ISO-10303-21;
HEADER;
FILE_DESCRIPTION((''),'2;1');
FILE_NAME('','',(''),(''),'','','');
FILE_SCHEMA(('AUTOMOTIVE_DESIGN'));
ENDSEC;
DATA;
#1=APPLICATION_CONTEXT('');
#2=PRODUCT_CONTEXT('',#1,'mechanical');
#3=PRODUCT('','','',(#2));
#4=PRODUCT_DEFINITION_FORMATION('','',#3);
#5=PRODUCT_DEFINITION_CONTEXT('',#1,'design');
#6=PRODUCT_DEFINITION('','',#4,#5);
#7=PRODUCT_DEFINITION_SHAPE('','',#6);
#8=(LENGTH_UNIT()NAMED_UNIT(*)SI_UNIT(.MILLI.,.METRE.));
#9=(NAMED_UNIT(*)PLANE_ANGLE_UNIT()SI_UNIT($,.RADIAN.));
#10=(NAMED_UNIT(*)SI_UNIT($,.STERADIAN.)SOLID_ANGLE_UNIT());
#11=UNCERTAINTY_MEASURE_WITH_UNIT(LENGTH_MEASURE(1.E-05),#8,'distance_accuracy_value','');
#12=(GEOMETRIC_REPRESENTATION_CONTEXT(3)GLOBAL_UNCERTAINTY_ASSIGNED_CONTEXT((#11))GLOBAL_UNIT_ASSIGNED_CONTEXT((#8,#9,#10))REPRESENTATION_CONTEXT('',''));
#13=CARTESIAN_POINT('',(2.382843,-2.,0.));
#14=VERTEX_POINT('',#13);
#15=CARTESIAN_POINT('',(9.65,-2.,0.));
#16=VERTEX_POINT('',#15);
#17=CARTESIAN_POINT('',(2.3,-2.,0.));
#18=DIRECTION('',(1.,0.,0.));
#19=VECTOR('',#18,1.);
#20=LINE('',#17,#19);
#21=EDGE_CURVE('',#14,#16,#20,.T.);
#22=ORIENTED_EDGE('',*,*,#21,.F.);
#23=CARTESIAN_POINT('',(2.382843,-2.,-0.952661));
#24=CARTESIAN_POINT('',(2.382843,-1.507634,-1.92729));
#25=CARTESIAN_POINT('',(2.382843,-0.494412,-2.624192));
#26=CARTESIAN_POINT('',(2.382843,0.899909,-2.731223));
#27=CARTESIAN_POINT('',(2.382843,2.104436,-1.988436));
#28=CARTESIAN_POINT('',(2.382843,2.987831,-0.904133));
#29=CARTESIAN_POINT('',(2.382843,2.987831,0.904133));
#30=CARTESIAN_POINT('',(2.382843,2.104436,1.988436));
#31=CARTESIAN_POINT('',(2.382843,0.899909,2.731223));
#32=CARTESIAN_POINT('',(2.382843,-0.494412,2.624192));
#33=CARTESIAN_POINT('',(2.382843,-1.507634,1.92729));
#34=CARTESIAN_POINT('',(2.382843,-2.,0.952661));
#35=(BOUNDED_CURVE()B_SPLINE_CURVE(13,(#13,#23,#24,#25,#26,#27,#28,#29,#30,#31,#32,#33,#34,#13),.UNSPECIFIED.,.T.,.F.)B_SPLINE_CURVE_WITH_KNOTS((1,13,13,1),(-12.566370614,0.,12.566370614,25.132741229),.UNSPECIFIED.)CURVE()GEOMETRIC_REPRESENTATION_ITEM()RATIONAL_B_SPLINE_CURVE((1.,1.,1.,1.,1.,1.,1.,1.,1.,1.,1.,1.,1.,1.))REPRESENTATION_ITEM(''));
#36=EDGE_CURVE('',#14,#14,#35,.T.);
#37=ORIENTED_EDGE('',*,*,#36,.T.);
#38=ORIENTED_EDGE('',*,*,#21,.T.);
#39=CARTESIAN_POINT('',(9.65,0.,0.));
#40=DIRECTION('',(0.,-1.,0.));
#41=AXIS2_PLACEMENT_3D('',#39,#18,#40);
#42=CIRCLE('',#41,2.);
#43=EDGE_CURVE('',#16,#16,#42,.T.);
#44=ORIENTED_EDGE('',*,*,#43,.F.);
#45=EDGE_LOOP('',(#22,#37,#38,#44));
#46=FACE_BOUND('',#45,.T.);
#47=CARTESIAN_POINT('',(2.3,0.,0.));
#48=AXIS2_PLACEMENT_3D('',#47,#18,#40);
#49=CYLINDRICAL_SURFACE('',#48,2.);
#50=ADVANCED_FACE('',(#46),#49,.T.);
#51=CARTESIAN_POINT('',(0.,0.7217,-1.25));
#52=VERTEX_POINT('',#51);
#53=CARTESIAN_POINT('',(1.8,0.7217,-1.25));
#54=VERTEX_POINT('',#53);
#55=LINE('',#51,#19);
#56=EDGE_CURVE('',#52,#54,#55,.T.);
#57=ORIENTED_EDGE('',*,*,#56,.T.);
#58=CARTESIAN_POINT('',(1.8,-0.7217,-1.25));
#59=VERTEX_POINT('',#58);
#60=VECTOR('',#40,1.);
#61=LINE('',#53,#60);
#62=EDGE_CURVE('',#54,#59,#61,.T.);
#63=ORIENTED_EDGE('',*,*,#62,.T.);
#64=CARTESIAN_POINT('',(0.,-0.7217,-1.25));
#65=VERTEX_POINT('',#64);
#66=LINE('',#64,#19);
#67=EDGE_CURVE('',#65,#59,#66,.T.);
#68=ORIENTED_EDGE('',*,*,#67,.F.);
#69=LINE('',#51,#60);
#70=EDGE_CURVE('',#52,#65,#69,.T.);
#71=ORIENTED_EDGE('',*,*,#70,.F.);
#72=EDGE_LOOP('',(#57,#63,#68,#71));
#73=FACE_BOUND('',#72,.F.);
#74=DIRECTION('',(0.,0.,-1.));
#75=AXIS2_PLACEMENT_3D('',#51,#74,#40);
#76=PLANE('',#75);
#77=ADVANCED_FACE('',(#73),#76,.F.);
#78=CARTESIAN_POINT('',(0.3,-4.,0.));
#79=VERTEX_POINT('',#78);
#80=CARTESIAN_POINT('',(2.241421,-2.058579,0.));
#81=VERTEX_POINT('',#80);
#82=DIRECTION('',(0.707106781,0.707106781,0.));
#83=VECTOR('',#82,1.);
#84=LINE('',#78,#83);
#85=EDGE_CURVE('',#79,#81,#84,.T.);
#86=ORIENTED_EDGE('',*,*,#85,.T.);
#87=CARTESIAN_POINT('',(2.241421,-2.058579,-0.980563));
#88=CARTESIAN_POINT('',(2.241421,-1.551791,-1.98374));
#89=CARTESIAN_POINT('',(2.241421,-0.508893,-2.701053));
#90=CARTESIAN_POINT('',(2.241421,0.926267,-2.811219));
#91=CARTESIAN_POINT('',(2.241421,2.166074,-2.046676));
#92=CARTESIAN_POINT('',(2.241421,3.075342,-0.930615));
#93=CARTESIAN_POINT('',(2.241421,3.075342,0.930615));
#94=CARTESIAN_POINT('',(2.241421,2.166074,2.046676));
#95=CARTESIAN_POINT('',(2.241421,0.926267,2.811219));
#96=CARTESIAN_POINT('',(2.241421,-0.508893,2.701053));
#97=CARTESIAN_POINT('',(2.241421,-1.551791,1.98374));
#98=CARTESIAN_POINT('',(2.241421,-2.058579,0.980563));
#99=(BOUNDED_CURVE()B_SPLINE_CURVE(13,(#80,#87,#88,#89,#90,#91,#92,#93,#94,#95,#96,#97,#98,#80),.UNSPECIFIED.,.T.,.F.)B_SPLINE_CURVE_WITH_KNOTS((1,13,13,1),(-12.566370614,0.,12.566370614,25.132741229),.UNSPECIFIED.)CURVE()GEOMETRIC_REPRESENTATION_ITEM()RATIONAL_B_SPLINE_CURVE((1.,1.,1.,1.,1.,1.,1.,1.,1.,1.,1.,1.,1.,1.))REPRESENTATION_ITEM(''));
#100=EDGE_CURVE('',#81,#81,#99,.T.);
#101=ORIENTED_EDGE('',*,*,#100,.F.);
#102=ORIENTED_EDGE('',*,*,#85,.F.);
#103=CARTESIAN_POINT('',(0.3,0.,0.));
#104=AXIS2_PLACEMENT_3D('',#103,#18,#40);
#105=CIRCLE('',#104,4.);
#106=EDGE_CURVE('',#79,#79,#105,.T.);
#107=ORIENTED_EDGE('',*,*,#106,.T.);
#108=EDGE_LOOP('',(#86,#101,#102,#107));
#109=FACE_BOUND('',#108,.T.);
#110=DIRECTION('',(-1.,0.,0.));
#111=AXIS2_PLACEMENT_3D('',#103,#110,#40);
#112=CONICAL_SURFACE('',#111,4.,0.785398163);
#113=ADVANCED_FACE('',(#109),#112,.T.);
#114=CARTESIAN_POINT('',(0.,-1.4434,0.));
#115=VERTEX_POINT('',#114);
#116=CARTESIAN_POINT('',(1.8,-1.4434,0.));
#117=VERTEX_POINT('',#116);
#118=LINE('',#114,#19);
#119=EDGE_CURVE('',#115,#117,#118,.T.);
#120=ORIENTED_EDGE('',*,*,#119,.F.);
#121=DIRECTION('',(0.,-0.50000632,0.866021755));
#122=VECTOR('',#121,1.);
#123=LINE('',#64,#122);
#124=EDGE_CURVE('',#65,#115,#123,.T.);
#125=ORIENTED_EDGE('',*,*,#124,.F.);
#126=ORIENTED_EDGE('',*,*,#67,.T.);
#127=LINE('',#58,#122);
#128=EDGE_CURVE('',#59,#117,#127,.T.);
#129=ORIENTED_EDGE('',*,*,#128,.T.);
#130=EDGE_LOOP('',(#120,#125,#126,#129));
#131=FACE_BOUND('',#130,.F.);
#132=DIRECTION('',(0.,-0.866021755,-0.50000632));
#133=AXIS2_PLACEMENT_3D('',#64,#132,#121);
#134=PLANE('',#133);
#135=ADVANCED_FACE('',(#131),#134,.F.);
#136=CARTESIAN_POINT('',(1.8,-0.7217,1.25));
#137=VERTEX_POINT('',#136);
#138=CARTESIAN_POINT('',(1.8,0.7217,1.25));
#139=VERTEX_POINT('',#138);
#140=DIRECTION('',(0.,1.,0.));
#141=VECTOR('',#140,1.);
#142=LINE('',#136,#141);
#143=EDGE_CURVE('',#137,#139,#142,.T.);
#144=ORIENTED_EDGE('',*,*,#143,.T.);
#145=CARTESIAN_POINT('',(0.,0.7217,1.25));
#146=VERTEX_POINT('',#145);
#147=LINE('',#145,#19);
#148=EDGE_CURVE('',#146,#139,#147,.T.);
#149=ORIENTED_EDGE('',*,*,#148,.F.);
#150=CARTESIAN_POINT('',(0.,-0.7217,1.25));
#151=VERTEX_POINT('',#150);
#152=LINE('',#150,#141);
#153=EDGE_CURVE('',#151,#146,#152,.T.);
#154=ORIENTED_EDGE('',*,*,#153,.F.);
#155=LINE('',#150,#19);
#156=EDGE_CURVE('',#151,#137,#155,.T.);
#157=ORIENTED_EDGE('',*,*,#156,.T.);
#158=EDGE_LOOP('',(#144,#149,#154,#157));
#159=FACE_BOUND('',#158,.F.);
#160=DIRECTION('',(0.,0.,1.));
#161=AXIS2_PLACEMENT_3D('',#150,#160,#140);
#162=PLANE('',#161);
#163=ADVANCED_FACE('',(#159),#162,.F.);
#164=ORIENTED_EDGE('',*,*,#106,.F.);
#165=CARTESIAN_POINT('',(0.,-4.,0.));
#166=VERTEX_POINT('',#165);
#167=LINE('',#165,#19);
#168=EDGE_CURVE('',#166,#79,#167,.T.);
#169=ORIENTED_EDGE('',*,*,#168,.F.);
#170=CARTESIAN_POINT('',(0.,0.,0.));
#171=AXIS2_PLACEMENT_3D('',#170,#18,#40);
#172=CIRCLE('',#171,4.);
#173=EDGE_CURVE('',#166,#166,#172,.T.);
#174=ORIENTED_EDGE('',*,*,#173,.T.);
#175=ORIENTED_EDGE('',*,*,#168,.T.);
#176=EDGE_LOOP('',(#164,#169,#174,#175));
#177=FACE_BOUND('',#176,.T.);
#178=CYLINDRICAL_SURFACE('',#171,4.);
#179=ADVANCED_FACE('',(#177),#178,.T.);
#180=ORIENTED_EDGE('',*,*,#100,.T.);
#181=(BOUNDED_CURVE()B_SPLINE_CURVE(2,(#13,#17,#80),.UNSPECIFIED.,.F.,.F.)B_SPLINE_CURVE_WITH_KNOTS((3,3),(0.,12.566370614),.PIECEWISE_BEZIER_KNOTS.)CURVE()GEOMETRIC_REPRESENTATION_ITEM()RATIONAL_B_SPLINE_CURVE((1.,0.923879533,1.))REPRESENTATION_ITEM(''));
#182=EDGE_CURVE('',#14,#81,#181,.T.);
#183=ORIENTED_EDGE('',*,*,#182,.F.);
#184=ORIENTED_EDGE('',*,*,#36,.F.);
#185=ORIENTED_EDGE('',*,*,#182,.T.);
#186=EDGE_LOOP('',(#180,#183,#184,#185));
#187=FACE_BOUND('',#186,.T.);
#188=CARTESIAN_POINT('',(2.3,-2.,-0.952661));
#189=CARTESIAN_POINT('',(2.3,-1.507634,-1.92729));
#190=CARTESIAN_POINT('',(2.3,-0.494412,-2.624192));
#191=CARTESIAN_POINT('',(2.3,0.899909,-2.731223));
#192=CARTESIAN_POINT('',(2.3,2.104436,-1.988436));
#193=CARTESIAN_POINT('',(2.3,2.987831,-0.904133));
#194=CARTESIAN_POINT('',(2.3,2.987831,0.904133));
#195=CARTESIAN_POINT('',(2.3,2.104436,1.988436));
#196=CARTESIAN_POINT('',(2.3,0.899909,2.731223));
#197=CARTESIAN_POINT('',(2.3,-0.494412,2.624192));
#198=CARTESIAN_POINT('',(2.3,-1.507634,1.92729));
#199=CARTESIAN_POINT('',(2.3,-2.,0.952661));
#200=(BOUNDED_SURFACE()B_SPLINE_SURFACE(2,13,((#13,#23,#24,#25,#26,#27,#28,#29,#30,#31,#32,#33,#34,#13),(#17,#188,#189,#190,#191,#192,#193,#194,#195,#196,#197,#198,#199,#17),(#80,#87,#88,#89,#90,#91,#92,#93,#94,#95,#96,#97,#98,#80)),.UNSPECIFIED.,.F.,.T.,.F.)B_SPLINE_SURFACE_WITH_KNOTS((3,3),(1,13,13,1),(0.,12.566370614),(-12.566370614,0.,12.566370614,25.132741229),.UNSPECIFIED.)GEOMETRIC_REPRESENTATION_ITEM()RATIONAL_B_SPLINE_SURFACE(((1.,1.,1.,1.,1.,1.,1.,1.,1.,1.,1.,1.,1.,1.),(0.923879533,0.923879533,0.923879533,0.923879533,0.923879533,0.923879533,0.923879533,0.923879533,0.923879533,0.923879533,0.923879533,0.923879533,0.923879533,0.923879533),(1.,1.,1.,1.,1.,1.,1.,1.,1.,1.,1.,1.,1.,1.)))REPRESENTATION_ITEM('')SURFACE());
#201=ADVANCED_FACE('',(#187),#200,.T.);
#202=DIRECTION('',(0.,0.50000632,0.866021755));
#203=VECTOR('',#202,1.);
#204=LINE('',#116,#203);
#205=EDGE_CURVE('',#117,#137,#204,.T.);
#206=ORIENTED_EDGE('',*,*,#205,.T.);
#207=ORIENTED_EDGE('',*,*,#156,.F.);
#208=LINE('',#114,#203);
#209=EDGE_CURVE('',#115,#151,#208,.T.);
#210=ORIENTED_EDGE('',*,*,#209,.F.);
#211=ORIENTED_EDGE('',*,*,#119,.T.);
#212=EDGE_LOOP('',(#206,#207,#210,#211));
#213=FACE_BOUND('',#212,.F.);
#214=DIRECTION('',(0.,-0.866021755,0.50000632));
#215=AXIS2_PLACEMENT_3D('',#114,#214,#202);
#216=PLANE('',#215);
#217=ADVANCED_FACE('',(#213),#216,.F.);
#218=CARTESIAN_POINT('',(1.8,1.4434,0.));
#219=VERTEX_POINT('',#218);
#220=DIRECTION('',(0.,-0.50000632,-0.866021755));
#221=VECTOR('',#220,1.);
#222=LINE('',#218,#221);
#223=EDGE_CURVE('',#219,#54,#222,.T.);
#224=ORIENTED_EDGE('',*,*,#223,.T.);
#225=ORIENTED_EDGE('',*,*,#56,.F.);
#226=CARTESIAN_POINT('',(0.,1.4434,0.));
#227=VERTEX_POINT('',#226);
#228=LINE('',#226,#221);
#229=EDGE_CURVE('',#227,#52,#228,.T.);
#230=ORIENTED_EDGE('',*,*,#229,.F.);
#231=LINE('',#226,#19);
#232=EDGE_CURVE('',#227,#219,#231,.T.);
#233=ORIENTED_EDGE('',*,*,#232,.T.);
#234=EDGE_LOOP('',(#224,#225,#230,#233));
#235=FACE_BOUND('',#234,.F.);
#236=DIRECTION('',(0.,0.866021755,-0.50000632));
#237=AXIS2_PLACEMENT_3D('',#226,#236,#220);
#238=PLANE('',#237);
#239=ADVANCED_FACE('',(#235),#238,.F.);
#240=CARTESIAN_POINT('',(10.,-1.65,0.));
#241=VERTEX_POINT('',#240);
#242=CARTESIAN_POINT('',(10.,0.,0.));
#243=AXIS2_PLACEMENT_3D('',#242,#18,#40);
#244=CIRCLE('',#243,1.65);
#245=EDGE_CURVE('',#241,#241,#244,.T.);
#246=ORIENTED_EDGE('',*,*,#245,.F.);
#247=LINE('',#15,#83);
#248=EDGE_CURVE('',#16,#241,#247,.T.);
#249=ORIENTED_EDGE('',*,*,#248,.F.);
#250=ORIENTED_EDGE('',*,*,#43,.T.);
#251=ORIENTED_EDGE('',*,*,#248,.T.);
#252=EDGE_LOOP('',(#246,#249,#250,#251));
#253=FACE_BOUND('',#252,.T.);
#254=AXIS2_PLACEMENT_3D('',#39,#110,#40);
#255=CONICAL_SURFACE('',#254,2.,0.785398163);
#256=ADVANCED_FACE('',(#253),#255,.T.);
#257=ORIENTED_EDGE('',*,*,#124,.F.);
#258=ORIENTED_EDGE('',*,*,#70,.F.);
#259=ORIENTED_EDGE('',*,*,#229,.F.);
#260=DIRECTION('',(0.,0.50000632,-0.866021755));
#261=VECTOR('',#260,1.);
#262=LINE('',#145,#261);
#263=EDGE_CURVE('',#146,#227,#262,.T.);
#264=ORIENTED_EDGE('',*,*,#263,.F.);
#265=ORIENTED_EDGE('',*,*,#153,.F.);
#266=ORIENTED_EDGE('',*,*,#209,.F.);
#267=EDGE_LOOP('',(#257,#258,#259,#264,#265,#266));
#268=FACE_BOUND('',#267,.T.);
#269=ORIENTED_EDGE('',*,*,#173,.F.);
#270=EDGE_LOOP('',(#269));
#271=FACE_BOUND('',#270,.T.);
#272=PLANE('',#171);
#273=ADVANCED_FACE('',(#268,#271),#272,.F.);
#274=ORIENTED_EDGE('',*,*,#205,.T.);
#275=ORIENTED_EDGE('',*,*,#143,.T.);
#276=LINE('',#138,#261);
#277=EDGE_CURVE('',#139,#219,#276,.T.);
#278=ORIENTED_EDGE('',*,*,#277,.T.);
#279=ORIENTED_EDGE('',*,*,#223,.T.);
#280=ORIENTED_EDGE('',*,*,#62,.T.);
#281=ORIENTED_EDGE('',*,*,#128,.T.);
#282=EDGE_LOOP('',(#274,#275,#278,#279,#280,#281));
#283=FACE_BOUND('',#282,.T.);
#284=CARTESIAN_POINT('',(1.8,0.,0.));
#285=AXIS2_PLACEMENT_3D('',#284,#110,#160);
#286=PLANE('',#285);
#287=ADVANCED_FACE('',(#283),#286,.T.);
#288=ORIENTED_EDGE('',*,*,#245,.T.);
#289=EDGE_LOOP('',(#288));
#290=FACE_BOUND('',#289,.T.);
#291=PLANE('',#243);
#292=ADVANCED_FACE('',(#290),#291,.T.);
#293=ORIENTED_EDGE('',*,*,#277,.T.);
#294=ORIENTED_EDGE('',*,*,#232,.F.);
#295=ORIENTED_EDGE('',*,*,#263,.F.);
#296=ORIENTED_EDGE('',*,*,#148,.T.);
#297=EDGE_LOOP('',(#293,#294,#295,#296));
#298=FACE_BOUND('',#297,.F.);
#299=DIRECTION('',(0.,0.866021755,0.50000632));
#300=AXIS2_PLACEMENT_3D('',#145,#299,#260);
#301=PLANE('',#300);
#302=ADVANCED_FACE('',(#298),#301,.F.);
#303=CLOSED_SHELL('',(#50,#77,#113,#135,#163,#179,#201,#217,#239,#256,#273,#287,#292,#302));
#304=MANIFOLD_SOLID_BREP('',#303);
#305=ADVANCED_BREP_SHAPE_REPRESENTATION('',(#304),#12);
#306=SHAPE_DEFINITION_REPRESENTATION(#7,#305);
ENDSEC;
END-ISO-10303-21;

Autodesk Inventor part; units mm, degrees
ref_plane "YZ Plane" through (0, 0, 0) normal (1, 0, 0) x (0, 1, 0)
sketch "Náčrt1" plane through (0, 0, 0) normal (0, 1, 0) x (-1, 0, 0)
  point P0 (0, 0)
sketch "Náčrt2" plane through (0, 0, 0) normal (0, 0, 1) x (-1, 0, 0)
  line L0 (-10, 2) -> (-10, 0)
  line L1 (-2.3, 2) -> (-10, 2)
  line L2 (-0.3, 4) -> (-2.3, 2)
  line L3 (0, 4) -> (-0.3, 4)
  line L4 (0, 0) -> (0, 4)
  line L5 (-10, 0) -> (0, 0)
  line L6 (-10, 0) -> (0, 0)
  line L7 (0, -9.6) -> (0, 1.6) projected
  line L8 (2, 0) -> (-12, 0) projected
  dimension "ParC" = 0.3
  dimension "d43" = 45
  dimension "d44" = 4
  dimension "d45" = 2
  dimension "d46" = 10
  dimension "d47" = 0
  dimension "d48" = 0
revolve "Rotace1" add sketch "Náčrt2" angle 360 about axis through (10, 0, 0) along (1, 0, 0)
sketch "Náčrt3" plane through (0, 0, 0) normal (-1, 0, 0) x (0, 0, 1)
  line L0 (-1.25, 0.7217) -> (-1.25, -0.7217)
  line L1 (0, 1.4434) -> (-1.25, 0.7217)
  line L2 (1.25, 0.7217) -> (0, 1.4434)
  line L3 (1.25, -0.7217) -> (1.25, 0.7217)
  line L4 (0, -1.4434) -> (1.25, -0.7217)
  line L5 (-1.25, -0.7217) -> (0, -1.4434)
  circle A0 centre (0, 0) radius 1.25 construction
  circle A1 centre (0, 0) radius 2 construction
  dimension "d11" = 2.5
  dimension "d13" = 120
  dimension "d15" = 120
extrude "Vysunutí1" cut sketch "Náčrt3" against normal blind 1.8
fillet "Zaoblení1" radius 0.2 1 edges at (2.3, 2, 0)
chamfer "Zkosení1" distance 0.35 angle 45 1 edges at (10, 2, 0) measured on face at (7.4609, 0.9288, -1.7713)
thread "Závit1" size "M4x0.7" class "6g" standard "ISO Metric profile" length 6.3
ref_plane "MSC_PF1" through (0, 0, 0) normal (1, 0, 0) x (0, 1, 0)
ref_plane "MSC_PT1" through (0, 0, 0) normal (1, 0, 0) x (0, 1, 0)
equation "\"d43\" = 0.5 * ang"
equation "\"d44\" = 0.5 * dk"
equation "\"d45\" = 0.5 * NND"
equation "\"d46\" = NLG"
equation "\"d11\" = ParS"
equation "\"d16\" = ParT"
equation "\"d18\" = r"
equation "\"d19\" = 0.5 * PTC"
equation "\"d39\" = 0.5 * PTC"
equation "\"NND\" = 4"
equation "\"PTC\" = 0.7"
equation "\"dk\" = 8"
equation "\"ParK\" = 2.3"
equation "\"ParS\" = 2.5"
equation "\"ParT\" = 1.8"
equation "\"r\" = 0.2"
equation "\"NLG\" = 10"
equation "\"ang\" = 90deg"
equation "\"THREADDIA\" = NND"
properties part number "ISO 10642 - M4 x  10" material "Steel"
